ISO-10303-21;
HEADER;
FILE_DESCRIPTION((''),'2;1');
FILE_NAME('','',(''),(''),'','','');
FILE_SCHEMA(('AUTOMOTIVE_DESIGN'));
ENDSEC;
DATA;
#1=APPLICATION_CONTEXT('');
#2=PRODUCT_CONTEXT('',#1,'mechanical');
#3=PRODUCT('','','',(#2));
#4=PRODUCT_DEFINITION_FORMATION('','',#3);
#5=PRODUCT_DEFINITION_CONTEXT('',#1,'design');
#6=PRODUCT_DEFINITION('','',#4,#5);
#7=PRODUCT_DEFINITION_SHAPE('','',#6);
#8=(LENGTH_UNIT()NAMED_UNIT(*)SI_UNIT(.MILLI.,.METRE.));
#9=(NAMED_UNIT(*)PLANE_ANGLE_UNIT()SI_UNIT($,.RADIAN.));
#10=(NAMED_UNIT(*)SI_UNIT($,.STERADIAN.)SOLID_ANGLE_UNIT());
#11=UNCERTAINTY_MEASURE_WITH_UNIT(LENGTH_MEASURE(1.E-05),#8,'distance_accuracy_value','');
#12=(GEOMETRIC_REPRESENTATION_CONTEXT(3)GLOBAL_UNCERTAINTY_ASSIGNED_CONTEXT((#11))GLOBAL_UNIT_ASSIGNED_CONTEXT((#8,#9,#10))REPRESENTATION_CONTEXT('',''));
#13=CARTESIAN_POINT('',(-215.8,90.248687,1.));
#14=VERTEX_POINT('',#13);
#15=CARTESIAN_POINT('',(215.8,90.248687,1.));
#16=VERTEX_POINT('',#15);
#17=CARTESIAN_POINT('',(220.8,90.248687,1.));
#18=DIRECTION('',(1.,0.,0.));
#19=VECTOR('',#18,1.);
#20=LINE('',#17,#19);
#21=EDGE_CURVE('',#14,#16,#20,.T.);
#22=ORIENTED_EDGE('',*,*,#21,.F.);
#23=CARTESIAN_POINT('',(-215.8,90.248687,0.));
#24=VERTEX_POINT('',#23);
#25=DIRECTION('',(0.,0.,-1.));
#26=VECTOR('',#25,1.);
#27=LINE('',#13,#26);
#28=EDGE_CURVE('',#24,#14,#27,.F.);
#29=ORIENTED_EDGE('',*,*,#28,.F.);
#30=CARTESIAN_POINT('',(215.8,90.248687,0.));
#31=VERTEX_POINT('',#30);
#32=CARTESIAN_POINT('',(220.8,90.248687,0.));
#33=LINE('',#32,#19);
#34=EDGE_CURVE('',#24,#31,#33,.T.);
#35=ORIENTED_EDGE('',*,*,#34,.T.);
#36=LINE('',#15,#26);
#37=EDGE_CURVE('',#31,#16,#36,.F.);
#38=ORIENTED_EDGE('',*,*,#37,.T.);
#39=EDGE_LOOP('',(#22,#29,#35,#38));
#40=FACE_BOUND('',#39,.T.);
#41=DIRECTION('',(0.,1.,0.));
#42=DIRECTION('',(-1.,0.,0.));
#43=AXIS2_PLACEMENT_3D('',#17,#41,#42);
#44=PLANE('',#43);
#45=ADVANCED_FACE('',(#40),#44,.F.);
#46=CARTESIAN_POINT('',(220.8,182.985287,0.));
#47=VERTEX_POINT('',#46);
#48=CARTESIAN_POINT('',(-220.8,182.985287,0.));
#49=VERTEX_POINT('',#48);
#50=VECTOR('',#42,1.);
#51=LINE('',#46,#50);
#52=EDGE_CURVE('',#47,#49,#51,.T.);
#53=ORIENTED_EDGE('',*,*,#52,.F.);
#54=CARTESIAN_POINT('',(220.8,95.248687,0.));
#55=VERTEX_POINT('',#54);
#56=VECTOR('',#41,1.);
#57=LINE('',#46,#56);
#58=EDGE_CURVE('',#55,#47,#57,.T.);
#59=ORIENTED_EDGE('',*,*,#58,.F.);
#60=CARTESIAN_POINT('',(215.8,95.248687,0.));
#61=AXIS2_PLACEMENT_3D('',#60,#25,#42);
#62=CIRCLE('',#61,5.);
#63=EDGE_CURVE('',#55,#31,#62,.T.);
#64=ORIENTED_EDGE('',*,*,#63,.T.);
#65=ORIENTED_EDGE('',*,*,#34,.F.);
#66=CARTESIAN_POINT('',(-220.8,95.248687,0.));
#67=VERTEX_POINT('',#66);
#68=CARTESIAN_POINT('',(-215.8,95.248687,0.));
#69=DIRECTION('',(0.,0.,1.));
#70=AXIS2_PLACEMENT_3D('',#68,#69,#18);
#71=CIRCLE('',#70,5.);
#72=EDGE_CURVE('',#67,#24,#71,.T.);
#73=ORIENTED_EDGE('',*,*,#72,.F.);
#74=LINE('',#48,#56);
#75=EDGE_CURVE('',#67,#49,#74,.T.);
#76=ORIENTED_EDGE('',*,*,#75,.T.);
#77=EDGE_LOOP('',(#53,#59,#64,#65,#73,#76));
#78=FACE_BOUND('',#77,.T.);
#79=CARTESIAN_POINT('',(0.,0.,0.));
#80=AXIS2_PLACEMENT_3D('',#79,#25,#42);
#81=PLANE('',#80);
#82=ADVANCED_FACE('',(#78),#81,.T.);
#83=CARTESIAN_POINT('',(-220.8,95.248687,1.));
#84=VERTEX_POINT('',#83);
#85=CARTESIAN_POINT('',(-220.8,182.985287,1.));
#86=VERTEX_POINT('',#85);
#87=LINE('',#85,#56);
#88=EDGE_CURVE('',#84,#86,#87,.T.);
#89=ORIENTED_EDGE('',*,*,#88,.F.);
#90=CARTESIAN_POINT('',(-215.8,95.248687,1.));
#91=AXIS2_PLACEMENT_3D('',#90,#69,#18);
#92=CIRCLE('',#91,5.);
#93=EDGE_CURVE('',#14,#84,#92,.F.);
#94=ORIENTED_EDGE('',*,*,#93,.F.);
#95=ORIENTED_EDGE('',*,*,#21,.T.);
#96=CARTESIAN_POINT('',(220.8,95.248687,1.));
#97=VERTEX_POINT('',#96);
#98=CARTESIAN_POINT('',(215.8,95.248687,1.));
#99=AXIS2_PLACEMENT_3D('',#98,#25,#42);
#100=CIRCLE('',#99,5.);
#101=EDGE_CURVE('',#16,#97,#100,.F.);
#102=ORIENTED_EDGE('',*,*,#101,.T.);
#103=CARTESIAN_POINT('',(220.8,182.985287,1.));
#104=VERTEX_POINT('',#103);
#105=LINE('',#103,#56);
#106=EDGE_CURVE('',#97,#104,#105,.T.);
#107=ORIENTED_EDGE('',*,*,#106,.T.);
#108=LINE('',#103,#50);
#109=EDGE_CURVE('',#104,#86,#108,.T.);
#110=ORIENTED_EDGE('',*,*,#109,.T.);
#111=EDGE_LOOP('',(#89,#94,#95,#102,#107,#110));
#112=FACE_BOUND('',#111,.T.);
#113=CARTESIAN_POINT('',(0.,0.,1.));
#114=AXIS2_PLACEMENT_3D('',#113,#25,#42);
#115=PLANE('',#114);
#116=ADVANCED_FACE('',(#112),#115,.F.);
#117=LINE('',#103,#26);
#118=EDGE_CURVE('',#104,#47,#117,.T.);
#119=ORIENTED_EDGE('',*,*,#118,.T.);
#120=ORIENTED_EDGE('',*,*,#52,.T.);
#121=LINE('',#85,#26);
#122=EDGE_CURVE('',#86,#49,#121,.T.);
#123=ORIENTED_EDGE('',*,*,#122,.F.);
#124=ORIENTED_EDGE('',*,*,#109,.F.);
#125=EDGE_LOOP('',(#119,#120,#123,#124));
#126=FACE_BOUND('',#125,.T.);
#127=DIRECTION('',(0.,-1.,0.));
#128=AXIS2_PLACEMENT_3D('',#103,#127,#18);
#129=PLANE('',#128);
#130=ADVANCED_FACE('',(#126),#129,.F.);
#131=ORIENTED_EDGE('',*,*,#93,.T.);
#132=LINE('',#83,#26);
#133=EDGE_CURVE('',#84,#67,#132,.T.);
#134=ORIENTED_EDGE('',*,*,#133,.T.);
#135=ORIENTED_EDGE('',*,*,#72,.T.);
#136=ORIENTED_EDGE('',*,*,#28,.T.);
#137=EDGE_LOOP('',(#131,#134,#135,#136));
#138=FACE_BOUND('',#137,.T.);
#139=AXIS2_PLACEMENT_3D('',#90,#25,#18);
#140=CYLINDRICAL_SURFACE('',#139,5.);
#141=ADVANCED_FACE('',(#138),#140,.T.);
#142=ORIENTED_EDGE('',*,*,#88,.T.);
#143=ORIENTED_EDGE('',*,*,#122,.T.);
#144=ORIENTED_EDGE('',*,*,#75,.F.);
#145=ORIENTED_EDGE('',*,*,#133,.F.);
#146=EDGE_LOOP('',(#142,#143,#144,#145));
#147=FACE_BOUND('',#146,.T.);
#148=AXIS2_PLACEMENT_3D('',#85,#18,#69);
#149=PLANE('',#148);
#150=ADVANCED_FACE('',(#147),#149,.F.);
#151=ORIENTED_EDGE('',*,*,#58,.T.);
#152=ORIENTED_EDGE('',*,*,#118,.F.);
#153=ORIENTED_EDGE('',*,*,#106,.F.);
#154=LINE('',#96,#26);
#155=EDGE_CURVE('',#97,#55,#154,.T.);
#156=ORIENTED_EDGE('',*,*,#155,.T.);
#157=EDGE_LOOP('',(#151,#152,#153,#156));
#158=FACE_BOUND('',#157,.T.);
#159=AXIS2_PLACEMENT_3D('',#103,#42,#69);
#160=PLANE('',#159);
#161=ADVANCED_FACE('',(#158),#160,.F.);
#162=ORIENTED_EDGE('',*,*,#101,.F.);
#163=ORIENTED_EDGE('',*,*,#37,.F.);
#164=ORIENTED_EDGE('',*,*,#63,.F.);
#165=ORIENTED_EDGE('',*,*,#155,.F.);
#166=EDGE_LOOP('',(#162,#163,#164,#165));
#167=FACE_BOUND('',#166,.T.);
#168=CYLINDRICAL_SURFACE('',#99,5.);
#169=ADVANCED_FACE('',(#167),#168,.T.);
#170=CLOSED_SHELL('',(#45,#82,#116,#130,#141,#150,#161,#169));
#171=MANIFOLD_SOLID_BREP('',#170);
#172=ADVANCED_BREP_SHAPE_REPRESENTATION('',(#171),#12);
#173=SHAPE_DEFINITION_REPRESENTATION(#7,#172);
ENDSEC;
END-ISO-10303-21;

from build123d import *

# Parameters (mm, degrees)
SKETCH1_W          = 220.8
SKETCH1_H          = 92.7366
BASE_FLANGE_DEPTH  = 1
BREAK_CORNER_DEPTH = 1


# Read off the part's stored shape, not the designer's step: Break-Corner
# Sheet-metal steps are written as plain solids
with BuildPart() as part:
    # Sketch1 → Base-Flange (new body)
    with BuildSketch(Plane.XY):
        with Locations((110.4, 136.6169868)):
            Rectangle(SKETCH1_W, SKETCH1_H)
    extrude(amount=BASE_FLANGE_DEPTH)

    # Break-Corner outline → Break-Corner (cut)
    with BuildSketch(Plane.XY):
        with BuildLine():
            Line((220.8, 90.2486868), (220.8, 95.2486868))
            ThreePointArc((220.8, 95.2486868), (219.335533906, 91.713152894), (215.8, 90.2486868))
            Line((215.8, 90.2486868), (220.8, 90.2486868))
        make_face()
    extrude(amount=BREAK_CORNER_DEPTH, mode=Mode.SUBTRACT)

    # Mirror-Vertical: part across plane


with BuildPart() as part_1:
    add(part.part)
    add(part.part.mirror(Plane(origin=(0, 182.9852868, 1), x_dir=(0, 0, 1), z_dir=(1, 0, 0))))


solid = part_1.part
